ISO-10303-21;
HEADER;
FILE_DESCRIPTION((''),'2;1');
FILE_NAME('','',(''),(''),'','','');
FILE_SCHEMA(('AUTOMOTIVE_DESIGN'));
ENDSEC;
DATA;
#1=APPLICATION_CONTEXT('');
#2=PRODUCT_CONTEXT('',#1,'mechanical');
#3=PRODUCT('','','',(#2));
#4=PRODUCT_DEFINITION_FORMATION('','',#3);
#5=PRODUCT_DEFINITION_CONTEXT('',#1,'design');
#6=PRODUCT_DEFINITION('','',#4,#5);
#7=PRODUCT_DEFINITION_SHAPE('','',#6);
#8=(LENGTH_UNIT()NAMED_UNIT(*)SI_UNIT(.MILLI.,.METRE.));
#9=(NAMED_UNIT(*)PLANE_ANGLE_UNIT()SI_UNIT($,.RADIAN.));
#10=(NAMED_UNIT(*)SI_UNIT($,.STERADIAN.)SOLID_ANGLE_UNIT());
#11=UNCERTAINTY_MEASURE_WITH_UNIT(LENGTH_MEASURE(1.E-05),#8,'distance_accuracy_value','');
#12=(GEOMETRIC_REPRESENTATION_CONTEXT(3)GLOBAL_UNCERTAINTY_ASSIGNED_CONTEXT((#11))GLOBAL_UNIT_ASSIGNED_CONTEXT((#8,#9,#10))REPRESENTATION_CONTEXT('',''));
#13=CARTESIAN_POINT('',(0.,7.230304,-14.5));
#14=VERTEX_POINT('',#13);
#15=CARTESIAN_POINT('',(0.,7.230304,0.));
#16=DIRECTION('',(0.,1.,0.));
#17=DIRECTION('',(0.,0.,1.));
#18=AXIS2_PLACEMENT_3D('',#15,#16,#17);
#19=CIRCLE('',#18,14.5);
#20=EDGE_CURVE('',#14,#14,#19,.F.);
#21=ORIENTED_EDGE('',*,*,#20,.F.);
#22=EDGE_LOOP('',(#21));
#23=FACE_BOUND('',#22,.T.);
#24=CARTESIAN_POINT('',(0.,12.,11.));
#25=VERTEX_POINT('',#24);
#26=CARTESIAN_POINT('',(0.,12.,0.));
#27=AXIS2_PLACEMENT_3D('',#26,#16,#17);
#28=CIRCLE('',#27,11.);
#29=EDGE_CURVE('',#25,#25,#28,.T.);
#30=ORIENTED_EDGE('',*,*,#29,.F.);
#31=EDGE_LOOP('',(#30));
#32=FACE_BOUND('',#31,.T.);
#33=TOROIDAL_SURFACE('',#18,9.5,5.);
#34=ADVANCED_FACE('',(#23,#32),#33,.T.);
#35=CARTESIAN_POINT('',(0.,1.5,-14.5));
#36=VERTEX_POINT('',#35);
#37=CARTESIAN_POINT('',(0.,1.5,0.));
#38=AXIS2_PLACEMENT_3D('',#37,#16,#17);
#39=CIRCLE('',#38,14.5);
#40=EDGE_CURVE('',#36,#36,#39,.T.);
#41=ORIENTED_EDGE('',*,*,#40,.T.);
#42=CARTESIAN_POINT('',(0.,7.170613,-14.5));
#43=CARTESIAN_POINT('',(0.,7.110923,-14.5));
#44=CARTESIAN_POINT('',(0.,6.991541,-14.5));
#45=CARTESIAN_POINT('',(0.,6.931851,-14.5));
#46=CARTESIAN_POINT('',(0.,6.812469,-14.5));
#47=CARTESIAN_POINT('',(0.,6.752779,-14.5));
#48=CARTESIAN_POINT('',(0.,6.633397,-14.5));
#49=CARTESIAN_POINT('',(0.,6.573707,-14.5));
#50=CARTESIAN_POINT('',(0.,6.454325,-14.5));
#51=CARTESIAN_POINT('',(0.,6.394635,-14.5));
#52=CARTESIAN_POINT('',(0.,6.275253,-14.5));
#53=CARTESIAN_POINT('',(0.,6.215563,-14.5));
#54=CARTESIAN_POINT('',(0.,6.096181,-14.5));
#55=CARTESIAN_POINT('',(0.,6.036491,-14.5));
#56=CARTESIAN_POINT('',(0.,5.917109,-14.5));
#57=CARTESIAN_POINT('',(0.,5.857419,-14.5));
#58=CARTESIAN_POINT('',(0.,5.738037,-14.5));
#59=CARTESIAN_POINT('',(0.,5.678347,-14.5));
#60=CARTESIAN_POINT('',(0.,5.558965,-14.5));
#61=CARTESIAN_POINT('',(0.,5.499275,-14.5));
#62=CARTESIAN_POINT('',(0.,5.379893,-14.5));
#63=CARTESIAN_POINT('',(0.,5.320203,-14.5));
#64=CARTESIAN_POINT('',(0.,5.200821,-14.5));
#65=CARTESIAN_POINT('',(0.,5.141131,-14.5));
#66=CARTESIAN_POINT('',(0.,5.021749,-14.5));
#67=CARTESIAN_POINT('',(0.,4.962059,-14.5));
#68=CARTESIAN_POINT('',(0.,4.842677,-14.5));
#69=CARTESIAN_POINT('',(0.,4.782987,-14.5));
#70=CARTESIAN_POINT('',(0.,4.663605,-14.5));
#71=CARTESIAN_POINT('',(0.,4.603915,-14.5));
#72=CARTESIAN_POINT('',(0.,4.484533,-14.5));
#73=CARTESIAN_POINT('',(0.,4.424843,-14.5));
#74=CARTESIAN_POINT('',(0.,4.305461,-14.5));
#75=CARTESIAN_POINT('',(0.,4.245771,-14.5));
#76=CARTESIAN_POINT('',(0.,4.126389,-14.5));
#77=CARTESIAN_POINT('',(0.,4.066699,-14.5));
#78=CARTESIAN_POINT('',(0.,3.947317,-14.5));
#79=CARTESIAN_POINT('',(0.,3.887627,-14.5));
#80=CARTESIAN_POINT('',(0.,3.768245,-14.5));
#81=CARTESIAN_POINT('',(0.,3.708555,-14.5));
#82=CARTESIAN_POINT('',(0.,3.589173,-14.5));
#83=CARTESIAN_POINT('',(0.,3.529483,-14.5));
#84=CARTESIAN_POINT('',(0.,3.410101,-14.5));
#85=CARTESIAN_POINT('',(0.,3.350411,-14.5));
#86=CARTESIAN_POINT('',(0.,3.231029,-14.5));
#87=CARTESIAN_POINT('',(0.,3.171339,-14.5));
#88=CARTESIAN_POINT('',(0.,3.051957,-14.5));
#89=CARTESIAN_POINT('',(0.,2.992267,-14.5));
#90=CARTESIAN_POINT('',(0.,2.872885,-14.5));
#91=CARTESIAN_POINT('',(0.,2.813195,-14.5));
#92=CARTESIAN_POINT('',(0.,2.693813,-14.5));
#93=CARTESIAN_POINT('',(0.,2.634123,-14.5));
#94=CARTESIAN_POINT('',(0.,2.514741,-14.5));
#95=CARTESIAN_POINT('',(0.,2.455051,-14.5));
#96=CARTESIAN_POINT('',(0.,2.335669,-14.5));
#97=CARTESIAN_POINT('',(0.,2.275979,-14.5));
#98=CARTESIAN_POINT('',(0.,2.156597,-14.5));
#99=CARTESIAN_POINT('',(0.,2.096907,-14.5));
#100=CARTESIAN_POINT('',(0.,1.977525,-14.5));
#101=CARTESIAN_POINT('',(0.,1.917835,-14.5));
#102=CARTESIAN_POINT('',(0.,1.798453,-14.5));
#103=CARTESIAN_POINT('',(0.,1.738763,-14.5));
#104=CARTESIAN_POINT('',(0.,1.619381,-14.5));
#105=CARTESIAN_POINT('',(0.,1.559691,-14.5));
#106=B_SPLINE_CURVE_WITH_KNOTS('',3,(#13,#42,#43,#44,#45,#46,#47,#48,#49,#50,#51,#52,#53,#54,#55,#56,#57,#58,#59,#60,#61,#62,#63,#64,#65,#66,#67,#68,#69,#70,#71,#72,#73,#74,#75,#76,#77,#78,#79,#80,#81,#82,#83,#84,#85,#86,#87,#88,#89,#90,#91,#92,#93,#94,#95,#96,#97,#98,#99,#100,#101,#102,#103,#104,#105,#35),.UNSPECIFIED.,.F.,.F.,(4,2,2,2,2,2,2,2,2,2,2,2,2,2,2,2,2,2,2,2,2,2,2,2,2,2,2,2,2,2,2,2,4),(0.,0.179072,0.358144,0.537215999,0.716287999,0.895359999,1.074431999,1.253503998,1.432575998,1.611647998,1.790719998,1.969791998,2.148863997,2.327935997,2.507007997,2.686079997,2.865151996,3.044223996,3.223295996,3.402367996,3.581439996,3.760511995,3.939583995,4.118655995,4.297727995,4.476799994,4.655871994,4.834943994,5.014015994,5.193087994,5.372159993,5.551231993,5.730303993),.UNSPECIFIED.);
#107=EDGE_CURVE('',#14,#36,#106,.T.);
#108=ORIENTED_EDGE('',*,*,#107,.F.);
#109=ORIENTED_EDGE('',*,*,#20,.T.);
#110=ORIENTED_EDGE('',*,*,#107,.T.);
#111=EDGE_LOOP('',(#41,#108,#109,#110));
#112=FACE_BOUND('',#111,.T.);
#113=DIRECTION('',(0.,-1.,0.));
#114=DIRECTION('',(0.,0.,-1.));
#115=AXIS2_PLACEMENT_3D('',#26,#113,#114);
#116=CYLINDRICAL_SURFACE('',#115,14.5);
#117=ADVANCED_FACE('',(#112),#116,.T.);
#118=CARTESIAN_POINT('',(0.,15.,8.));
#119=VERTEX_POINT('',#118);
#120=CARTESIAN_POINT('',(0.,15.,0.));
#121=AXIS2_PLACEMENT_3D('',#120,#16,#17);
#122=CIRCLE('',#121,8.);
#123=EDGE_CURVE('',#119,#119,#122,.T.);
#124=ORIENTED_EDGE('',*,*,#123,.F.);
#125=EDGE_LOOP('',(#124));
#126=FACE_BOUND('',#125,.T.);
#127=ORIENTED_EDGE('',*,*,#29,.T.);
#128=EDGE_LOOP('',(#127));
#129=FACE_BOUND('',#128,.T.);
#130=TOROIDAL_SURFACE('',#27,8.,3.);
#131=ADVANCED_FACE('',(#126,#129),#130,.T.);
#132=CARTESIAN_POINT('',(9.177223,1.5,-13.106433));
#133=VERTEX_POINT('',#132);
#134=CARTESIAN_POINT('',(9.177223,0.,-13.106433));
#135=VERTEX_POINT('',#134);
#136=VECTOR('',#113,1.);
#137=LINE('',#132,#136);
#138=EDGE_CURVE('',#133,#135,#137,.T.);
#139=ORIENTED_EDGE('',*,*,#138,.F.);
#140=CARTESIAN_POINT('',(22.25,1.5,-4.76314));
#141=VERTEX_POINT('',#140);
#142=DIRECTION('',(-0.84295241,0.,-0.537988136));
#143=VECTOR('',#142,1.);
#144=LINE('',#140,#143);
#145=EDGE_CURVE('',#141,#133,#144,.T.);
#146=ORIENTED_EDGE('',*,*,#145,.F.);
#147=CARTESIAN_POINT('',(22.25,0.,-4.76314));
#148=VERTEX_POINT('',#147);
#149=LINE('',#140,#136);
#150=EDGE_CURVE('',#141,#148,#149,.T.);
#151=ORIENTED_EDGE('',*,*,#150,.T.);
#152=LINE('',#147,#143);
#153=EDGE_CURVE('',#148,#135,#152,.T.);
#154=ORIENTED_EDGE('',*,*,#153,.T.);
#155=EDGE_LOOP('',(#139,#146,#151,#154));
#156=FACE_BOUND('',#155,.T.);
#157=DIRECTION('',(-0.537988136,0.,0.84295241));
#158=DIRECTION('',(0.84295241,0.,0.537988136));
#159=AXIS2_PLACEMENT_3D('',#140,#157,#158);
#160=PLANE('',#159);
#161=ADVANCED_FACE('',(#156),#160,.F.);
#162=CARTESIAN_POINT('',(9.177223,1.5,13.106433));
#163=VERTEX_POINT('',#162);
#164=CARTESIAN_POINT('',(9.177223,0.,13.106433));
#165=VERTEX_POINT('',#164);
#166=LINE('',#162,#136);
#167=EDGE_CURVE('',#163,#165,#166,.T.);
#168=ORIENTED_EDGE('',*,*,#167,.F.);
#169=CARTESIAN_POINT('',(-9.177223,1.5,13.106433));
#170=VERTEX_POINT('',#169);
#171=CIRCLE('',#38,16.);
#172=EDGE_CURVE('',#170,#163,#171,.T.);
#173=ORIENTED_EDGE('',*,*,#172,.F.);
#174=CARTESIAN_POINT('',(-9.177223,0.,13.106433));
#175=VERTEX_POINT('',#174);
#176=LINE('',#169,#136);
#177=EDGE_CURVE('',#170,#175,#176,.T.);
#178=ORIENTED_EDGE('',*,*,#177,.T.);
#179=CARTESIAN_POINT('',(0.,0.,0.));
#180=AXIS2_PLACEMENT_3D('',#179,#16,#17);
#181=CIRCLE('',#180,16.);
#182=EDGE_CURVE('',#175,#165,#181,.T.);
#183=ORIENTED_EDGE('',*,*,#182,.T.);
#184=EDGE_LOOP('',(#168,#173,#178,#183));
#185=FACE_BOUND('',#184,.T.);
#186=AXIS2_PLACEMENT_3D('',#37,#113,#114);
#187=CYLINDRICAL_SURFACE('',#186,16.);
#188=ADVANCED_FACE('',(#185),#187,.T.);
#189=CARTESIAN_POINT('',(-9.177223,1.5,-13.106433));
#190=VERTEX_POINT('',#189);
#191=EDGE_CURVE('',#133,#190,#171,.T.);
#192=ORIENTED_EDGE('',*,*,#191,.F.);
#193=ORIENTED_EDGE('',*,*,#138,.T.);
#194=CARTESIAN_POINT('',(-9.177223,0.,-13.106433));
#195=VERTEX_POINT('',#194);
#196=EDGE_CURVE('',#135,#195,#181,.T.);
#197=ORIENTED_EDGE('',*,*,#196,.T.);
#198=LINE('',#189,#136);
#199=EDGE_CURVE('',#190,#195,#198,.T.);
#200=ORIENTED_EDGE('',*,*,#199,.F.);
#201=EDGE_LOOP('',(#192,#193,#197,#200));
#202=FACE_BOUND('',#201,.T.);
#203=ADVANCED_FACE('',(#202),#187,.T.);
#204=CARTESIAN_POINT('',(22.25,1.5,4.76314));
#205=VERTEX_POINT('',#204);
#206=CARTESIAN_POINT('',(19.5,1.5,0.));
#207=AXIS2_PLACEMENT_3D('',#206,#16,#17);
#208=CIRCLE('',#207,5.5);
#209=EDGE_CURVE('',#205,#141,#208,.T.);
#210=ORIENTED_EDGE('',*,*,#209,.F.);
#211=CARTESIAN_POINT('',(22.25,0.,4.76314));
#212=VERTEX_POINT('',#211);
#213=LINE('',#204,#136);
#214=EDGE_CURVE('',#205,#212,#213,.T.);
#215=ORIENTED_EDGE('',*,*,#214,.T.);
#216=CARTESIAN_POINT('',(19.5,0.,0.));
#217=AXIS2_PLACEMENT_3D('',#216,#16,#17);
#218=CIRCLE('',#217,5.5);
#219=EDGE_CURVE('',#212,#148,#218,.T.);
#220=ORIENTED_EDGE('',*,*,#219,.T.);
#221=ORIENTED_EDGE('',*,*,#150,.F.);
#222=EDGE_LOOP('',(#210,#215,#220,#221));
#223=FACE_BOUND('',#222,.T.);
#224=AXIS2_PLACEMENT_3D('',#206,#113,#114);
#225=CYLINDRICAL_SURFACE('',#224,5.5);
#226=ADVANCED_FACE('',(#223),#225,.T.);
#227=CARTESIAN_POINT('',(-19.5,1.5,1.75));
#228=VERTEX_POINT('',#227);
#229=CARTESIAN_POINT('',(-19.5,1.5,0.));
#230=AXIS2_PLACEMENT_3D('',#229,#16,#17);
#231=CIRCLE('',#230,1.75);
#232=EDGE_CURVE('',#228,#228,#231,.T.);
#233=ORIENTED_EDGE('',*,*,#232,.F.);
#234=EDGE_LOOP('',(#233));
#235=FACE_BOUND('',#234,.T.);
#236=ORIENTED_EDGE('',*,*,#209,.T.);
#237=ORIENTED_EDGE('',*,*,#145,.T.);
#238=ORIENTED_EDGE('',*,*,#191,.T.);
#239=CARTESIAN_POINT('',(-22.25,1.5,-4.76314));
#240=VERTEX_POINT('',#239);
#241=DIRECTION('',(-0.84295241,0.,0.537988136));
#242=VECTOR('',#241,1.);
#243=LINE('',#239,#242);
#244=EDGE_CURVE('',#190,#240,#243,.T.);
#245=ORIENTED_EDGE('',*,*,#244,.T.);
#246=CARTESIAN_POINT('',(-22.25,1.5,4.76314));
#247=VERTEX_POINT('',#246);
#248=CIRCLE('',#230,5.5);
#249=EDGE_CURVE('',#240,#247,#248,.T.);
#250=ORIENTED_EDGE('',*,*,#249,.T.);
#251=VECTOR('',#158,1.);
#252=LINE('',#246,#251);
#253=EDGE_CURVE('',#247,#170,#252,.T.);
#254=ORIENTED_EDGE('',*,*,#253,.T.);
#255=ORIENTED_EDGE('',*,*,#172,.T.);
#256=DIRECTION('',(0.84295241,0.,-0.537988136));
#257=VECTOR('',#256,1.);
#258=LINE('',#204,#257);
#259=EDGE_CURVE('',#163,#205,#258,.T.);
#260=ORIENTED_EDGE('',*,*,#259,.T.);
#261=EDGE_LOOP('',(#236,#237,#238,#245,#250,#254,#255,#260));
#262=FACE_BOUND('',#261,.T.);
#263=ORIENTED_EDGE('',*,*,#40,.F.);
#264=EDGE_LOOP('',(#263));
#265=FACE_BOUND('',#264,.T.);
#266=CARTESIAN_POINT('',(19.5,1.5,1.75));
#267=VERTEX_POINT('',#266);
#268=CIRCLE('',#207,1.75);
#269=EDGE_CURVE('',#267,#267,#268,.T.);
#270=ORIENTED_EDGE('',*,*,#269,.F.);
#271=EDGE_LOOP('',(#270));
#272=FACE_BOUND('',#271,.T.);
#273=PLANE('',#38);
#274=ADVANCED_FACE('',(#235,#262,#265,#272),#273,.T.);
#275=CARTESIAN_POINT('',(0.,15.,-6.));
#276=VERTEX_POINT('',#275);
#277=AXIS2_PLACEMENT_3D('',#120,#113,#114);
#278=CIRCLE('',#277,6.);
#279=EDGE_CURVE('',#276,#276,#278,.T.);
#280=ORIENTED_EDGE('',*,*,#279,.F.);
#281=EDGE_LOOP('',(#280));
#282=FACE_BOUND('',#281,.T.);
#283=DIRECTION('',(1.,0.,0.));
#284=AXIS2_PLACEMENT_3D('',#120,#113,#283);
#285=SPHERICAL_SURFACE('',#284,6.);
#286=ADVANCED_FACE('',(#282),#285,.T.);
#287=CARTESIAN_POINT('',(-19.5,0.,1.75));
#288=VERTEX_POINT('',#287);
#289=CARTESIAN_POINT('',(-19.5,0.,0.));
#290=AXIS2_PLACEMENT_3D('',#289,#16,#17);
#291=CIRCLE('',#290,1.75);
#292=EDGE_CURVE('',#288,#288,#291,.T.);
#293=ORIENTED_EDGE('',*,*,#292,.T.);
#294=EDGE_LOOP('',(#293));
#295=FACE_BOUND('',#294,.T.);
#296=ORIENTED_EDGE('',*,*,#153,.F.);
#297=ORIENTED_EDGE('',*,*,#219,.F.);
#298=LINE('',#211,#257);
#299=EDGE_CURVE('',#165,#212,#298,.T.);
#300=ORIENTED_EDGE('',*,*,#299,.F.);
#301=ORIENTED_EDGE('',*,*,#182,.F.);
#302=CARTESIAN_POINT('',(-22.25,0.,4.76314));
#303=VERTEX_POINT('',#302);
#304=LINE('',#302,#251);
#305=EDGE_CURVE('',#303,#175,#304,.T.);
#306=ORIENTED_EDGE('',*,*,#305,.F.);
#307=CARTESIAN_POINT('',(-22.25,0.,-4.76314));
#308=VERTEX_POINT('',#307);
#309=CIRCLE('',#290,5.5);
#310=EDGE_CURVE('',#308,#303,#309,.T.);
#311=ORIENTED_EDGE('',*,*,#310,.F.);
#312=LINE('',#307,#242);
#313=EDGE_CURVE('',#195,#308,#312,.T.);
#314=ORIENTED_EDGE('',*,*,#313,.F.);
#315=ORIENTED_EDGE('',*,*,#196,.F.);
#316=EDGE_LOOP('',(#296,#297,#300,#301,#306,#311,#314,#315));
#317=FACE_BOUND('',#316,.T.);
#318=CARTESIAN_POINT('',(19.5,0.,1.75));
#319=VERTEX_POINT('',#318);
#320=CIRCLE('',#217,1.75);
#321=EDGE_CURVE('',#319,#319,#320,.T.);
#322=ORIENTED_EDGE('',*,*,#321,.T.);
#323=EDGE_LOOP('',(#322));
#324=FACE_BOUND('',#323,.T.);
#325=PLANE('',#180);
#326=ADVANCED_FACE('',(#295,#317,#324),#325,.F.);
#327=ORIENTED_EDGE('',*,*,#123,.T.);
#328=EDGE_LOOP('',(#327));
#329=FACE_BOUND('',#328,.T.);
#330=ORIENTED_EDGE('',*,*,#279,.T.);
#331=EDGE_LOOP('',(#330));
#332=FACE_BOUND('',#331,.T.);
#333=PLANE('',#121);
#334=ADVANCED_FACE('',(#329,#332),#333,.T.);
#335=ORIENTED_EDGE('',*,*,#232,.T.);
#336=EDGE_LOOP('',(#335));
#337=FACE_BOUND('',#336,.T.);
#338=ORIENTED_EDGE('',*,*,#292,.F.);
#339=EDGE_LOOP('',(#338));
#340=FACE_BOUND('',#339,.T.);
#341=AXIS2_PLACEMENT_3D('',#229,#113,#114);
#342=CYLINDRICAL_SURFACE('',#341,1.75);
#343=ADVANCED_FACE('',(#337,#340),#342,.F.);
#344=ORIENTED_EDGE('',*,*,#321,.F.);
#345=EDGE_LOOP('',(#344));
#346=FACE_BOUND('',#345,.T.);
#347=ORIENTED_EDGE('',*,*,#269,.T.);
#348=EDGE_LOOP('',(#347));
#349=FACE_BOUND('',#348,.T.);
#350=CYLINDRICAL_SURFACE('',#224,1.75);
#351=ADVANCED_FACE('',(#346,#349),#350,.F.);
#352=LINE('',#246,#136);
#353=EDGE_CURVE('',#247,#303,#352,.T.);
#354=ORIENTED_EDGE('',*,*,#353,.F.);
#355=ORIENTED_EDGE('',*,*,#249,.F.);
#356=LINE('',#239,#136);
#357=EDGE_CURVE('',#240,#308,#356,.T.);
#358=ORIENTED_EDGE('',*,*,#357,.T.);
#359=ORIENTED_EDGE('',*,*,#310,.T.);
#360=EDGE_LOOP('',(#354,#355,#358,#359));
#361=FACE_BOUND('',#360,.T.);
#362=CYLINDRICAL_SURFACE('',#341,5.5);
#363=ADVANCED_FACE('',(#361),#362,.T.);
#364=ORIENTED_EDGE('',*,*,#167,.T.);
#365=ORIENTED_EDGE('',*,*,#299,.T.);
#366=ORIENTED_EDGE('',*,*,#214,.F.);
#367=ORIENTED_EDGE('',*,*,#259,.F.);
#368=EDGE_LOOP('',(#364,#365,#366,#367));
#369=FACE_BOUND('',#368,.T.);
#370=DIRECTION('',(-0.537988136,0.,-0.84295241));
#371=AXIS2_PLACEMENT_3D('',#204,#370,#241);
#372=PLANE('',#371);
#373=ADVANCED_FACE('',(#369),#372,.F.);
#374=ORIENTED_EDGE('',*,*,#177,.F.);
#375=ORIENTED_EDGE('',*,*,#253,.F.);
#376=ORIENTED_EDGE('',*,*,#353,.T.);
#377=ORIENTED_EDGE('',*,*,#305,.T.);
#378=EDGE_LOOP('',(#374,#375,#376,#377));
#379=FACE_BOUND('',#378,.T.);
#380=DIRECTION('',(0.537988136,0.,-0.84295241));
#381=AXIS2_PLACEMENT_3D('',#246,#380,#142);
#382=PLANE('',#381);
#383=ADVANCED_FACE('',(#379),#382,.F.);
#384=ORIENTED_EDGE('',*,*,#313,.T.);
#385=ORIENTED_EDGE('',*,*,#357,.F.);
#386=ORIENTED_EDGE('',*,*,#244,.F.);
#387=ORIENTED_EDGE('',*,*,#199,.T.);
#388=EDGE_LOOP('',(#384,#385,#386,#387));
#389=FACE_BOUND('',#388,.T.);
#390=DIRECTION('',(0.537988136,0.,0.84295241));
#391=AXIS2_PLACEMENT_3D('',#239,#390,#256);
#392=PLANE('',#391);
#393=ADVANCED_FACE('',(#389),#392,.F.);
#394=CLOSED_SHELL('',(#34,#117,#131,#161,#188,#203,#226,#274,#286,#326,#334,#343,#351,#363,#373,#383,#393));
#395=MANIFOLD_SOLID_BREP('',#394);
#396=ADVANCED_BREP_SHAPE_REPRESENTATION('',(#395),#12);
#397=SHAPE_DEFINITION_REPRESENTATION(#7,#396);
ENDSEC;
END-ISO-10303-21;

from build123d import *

# Parameters (mm, degrees)
SKETCH1_R           = 1.75
BOSS_EXTRUDE1_DEPTH = 1.5
SKETCH2_R           = 14.5
BOSS_EXTRUDE2_DEPTH = 10.5
SKETCH3_R           = 11
BOSS_EXTRUDE3_DEPTH = 3
FILLET1_R           = 5
FILLET2_R           = 3


# Some blends are built 0.0001 mm under size
with BuildPart() as part:
    # Sketch1 → Boss-Extrude1 (new body)
    with BuildSketch(Plane(origin=(0, 0, 0), x_dir=(1, 0, 0), z_dir=(0, 1, 0))):
        with BuildLine():
            Line((-22.25, -4.763139721), (-9.177222982, -13.106432709))
            ThreePointArc((-9.177222982, -13.106432709), (0, -16), (9.177222982, -13.106432709))
            Line((9.177222982, -13.106432709), (22.25, -4.763139721))
            ThreePointArc((22.25, -4.763139721), (25, 0), (22.25, 4.763139721))
            Line((22.25, 4.763139721), (9.177222982, 13.106432709))
            ThreePointArc((9.177222982, 13.106432709), (0, 16), (-9.177222982, 13.106432709))
            Line((-9.177222982, 13.106432709), (-22.25, 4.763139721))
            ThreePointArc((-22.25, 4.763139721), (-25, 0), (-22.25, -4.763139721))
        make_face()
        with Locations(Location((-19.5, 0, 0), (0, 0, 270))):
            Circle(SKETCH1_R, mode=Mode.SUBTRACT)
        with Locations(Location((19.5, 0, 0), (0, 0, 270))):
            Circle(SKETCH1_R, mode=Mode.SUBTRACT)
    extrude(amount=BOSS_EXTRUDE1_DEPTH)

    # Sketch2 → Boss-Extrude2 (add)
    with BuildSketch(Plane(origin=(0, 1.5, 0), x_dir=(1, 0, 0), z_dir=(0, 1, 0))):
        with Locations(Location((0, 0, 0), (0, 0, 90))):
            Circle(SKETCH2_R)
    extrude(amount=BOSS_EXTRUDE2_DEPTH)

    # Sketch3 → Boss-Extrude3 (add)
    with BuildSketch(Plane(origin=(0, 12, 0), x_dir=(1, 0, 0), z_dir=(0, 1, 0))):
        with Locations(Location((0, 0, 0), (0, 0, 270))):
            Circle(SKETCH3_R)
    extrude(amount=BOSS_EXTRUDE3_DEPTH)

    # Sketch5 → Revolve1 (revolve)
    with BuildSketch(Plane.XY):
        with BuildLine():
            Line((0, 15), (0, 21))
            ThreePointArc((0, 21), (4.242640687, 19.242640687), (6, 15))
            Line((6, 15), (0, 15))
        make_face()
    revolve(axis=Axis((0, 15, 0), (0, 1, 0)))

    # Fillet1
    # the kernel refuses this fillet: 5 mm, written as the material it takes off along each edge
    with BuildSketch(Plane(origin=(0, 12, 0), x_dir=(0, 0, -1), z_dir=(1, 0, 0))) as fillet1_piece_1:
        with BuildLine():
            CenterArc((9.5, -4.769696007), FILLET1_R, 0, 72.542396876)
            Line((11, 0), (11.03, 0.09539392))
            ThreePointArc((11.03, 0.09539392), (12.75, 0.1), (14.5, 0.1))
            Line((14.5, 0.1), (14.6, 0))
            Line((14.6, 0), (14.6, -4.769696007))
            Line((14.6, -4.769696007), (14.5, -4.769696007))
        make_face()
    revolve(axis=Axis((0, 12, 0), (0, 1, 0)), mode=Mode.SUBTRACT)

    # Fillet2
    fillet2_edges = [part.edges().sort_by_distance(p)[0] for p in [
        (0, 15, -11),
    ]]
    fillet(fillet2_edges, radius=FILLET2_R - 0.0001)  # a hair under: the kernel refuses the full size


solid = part.part
